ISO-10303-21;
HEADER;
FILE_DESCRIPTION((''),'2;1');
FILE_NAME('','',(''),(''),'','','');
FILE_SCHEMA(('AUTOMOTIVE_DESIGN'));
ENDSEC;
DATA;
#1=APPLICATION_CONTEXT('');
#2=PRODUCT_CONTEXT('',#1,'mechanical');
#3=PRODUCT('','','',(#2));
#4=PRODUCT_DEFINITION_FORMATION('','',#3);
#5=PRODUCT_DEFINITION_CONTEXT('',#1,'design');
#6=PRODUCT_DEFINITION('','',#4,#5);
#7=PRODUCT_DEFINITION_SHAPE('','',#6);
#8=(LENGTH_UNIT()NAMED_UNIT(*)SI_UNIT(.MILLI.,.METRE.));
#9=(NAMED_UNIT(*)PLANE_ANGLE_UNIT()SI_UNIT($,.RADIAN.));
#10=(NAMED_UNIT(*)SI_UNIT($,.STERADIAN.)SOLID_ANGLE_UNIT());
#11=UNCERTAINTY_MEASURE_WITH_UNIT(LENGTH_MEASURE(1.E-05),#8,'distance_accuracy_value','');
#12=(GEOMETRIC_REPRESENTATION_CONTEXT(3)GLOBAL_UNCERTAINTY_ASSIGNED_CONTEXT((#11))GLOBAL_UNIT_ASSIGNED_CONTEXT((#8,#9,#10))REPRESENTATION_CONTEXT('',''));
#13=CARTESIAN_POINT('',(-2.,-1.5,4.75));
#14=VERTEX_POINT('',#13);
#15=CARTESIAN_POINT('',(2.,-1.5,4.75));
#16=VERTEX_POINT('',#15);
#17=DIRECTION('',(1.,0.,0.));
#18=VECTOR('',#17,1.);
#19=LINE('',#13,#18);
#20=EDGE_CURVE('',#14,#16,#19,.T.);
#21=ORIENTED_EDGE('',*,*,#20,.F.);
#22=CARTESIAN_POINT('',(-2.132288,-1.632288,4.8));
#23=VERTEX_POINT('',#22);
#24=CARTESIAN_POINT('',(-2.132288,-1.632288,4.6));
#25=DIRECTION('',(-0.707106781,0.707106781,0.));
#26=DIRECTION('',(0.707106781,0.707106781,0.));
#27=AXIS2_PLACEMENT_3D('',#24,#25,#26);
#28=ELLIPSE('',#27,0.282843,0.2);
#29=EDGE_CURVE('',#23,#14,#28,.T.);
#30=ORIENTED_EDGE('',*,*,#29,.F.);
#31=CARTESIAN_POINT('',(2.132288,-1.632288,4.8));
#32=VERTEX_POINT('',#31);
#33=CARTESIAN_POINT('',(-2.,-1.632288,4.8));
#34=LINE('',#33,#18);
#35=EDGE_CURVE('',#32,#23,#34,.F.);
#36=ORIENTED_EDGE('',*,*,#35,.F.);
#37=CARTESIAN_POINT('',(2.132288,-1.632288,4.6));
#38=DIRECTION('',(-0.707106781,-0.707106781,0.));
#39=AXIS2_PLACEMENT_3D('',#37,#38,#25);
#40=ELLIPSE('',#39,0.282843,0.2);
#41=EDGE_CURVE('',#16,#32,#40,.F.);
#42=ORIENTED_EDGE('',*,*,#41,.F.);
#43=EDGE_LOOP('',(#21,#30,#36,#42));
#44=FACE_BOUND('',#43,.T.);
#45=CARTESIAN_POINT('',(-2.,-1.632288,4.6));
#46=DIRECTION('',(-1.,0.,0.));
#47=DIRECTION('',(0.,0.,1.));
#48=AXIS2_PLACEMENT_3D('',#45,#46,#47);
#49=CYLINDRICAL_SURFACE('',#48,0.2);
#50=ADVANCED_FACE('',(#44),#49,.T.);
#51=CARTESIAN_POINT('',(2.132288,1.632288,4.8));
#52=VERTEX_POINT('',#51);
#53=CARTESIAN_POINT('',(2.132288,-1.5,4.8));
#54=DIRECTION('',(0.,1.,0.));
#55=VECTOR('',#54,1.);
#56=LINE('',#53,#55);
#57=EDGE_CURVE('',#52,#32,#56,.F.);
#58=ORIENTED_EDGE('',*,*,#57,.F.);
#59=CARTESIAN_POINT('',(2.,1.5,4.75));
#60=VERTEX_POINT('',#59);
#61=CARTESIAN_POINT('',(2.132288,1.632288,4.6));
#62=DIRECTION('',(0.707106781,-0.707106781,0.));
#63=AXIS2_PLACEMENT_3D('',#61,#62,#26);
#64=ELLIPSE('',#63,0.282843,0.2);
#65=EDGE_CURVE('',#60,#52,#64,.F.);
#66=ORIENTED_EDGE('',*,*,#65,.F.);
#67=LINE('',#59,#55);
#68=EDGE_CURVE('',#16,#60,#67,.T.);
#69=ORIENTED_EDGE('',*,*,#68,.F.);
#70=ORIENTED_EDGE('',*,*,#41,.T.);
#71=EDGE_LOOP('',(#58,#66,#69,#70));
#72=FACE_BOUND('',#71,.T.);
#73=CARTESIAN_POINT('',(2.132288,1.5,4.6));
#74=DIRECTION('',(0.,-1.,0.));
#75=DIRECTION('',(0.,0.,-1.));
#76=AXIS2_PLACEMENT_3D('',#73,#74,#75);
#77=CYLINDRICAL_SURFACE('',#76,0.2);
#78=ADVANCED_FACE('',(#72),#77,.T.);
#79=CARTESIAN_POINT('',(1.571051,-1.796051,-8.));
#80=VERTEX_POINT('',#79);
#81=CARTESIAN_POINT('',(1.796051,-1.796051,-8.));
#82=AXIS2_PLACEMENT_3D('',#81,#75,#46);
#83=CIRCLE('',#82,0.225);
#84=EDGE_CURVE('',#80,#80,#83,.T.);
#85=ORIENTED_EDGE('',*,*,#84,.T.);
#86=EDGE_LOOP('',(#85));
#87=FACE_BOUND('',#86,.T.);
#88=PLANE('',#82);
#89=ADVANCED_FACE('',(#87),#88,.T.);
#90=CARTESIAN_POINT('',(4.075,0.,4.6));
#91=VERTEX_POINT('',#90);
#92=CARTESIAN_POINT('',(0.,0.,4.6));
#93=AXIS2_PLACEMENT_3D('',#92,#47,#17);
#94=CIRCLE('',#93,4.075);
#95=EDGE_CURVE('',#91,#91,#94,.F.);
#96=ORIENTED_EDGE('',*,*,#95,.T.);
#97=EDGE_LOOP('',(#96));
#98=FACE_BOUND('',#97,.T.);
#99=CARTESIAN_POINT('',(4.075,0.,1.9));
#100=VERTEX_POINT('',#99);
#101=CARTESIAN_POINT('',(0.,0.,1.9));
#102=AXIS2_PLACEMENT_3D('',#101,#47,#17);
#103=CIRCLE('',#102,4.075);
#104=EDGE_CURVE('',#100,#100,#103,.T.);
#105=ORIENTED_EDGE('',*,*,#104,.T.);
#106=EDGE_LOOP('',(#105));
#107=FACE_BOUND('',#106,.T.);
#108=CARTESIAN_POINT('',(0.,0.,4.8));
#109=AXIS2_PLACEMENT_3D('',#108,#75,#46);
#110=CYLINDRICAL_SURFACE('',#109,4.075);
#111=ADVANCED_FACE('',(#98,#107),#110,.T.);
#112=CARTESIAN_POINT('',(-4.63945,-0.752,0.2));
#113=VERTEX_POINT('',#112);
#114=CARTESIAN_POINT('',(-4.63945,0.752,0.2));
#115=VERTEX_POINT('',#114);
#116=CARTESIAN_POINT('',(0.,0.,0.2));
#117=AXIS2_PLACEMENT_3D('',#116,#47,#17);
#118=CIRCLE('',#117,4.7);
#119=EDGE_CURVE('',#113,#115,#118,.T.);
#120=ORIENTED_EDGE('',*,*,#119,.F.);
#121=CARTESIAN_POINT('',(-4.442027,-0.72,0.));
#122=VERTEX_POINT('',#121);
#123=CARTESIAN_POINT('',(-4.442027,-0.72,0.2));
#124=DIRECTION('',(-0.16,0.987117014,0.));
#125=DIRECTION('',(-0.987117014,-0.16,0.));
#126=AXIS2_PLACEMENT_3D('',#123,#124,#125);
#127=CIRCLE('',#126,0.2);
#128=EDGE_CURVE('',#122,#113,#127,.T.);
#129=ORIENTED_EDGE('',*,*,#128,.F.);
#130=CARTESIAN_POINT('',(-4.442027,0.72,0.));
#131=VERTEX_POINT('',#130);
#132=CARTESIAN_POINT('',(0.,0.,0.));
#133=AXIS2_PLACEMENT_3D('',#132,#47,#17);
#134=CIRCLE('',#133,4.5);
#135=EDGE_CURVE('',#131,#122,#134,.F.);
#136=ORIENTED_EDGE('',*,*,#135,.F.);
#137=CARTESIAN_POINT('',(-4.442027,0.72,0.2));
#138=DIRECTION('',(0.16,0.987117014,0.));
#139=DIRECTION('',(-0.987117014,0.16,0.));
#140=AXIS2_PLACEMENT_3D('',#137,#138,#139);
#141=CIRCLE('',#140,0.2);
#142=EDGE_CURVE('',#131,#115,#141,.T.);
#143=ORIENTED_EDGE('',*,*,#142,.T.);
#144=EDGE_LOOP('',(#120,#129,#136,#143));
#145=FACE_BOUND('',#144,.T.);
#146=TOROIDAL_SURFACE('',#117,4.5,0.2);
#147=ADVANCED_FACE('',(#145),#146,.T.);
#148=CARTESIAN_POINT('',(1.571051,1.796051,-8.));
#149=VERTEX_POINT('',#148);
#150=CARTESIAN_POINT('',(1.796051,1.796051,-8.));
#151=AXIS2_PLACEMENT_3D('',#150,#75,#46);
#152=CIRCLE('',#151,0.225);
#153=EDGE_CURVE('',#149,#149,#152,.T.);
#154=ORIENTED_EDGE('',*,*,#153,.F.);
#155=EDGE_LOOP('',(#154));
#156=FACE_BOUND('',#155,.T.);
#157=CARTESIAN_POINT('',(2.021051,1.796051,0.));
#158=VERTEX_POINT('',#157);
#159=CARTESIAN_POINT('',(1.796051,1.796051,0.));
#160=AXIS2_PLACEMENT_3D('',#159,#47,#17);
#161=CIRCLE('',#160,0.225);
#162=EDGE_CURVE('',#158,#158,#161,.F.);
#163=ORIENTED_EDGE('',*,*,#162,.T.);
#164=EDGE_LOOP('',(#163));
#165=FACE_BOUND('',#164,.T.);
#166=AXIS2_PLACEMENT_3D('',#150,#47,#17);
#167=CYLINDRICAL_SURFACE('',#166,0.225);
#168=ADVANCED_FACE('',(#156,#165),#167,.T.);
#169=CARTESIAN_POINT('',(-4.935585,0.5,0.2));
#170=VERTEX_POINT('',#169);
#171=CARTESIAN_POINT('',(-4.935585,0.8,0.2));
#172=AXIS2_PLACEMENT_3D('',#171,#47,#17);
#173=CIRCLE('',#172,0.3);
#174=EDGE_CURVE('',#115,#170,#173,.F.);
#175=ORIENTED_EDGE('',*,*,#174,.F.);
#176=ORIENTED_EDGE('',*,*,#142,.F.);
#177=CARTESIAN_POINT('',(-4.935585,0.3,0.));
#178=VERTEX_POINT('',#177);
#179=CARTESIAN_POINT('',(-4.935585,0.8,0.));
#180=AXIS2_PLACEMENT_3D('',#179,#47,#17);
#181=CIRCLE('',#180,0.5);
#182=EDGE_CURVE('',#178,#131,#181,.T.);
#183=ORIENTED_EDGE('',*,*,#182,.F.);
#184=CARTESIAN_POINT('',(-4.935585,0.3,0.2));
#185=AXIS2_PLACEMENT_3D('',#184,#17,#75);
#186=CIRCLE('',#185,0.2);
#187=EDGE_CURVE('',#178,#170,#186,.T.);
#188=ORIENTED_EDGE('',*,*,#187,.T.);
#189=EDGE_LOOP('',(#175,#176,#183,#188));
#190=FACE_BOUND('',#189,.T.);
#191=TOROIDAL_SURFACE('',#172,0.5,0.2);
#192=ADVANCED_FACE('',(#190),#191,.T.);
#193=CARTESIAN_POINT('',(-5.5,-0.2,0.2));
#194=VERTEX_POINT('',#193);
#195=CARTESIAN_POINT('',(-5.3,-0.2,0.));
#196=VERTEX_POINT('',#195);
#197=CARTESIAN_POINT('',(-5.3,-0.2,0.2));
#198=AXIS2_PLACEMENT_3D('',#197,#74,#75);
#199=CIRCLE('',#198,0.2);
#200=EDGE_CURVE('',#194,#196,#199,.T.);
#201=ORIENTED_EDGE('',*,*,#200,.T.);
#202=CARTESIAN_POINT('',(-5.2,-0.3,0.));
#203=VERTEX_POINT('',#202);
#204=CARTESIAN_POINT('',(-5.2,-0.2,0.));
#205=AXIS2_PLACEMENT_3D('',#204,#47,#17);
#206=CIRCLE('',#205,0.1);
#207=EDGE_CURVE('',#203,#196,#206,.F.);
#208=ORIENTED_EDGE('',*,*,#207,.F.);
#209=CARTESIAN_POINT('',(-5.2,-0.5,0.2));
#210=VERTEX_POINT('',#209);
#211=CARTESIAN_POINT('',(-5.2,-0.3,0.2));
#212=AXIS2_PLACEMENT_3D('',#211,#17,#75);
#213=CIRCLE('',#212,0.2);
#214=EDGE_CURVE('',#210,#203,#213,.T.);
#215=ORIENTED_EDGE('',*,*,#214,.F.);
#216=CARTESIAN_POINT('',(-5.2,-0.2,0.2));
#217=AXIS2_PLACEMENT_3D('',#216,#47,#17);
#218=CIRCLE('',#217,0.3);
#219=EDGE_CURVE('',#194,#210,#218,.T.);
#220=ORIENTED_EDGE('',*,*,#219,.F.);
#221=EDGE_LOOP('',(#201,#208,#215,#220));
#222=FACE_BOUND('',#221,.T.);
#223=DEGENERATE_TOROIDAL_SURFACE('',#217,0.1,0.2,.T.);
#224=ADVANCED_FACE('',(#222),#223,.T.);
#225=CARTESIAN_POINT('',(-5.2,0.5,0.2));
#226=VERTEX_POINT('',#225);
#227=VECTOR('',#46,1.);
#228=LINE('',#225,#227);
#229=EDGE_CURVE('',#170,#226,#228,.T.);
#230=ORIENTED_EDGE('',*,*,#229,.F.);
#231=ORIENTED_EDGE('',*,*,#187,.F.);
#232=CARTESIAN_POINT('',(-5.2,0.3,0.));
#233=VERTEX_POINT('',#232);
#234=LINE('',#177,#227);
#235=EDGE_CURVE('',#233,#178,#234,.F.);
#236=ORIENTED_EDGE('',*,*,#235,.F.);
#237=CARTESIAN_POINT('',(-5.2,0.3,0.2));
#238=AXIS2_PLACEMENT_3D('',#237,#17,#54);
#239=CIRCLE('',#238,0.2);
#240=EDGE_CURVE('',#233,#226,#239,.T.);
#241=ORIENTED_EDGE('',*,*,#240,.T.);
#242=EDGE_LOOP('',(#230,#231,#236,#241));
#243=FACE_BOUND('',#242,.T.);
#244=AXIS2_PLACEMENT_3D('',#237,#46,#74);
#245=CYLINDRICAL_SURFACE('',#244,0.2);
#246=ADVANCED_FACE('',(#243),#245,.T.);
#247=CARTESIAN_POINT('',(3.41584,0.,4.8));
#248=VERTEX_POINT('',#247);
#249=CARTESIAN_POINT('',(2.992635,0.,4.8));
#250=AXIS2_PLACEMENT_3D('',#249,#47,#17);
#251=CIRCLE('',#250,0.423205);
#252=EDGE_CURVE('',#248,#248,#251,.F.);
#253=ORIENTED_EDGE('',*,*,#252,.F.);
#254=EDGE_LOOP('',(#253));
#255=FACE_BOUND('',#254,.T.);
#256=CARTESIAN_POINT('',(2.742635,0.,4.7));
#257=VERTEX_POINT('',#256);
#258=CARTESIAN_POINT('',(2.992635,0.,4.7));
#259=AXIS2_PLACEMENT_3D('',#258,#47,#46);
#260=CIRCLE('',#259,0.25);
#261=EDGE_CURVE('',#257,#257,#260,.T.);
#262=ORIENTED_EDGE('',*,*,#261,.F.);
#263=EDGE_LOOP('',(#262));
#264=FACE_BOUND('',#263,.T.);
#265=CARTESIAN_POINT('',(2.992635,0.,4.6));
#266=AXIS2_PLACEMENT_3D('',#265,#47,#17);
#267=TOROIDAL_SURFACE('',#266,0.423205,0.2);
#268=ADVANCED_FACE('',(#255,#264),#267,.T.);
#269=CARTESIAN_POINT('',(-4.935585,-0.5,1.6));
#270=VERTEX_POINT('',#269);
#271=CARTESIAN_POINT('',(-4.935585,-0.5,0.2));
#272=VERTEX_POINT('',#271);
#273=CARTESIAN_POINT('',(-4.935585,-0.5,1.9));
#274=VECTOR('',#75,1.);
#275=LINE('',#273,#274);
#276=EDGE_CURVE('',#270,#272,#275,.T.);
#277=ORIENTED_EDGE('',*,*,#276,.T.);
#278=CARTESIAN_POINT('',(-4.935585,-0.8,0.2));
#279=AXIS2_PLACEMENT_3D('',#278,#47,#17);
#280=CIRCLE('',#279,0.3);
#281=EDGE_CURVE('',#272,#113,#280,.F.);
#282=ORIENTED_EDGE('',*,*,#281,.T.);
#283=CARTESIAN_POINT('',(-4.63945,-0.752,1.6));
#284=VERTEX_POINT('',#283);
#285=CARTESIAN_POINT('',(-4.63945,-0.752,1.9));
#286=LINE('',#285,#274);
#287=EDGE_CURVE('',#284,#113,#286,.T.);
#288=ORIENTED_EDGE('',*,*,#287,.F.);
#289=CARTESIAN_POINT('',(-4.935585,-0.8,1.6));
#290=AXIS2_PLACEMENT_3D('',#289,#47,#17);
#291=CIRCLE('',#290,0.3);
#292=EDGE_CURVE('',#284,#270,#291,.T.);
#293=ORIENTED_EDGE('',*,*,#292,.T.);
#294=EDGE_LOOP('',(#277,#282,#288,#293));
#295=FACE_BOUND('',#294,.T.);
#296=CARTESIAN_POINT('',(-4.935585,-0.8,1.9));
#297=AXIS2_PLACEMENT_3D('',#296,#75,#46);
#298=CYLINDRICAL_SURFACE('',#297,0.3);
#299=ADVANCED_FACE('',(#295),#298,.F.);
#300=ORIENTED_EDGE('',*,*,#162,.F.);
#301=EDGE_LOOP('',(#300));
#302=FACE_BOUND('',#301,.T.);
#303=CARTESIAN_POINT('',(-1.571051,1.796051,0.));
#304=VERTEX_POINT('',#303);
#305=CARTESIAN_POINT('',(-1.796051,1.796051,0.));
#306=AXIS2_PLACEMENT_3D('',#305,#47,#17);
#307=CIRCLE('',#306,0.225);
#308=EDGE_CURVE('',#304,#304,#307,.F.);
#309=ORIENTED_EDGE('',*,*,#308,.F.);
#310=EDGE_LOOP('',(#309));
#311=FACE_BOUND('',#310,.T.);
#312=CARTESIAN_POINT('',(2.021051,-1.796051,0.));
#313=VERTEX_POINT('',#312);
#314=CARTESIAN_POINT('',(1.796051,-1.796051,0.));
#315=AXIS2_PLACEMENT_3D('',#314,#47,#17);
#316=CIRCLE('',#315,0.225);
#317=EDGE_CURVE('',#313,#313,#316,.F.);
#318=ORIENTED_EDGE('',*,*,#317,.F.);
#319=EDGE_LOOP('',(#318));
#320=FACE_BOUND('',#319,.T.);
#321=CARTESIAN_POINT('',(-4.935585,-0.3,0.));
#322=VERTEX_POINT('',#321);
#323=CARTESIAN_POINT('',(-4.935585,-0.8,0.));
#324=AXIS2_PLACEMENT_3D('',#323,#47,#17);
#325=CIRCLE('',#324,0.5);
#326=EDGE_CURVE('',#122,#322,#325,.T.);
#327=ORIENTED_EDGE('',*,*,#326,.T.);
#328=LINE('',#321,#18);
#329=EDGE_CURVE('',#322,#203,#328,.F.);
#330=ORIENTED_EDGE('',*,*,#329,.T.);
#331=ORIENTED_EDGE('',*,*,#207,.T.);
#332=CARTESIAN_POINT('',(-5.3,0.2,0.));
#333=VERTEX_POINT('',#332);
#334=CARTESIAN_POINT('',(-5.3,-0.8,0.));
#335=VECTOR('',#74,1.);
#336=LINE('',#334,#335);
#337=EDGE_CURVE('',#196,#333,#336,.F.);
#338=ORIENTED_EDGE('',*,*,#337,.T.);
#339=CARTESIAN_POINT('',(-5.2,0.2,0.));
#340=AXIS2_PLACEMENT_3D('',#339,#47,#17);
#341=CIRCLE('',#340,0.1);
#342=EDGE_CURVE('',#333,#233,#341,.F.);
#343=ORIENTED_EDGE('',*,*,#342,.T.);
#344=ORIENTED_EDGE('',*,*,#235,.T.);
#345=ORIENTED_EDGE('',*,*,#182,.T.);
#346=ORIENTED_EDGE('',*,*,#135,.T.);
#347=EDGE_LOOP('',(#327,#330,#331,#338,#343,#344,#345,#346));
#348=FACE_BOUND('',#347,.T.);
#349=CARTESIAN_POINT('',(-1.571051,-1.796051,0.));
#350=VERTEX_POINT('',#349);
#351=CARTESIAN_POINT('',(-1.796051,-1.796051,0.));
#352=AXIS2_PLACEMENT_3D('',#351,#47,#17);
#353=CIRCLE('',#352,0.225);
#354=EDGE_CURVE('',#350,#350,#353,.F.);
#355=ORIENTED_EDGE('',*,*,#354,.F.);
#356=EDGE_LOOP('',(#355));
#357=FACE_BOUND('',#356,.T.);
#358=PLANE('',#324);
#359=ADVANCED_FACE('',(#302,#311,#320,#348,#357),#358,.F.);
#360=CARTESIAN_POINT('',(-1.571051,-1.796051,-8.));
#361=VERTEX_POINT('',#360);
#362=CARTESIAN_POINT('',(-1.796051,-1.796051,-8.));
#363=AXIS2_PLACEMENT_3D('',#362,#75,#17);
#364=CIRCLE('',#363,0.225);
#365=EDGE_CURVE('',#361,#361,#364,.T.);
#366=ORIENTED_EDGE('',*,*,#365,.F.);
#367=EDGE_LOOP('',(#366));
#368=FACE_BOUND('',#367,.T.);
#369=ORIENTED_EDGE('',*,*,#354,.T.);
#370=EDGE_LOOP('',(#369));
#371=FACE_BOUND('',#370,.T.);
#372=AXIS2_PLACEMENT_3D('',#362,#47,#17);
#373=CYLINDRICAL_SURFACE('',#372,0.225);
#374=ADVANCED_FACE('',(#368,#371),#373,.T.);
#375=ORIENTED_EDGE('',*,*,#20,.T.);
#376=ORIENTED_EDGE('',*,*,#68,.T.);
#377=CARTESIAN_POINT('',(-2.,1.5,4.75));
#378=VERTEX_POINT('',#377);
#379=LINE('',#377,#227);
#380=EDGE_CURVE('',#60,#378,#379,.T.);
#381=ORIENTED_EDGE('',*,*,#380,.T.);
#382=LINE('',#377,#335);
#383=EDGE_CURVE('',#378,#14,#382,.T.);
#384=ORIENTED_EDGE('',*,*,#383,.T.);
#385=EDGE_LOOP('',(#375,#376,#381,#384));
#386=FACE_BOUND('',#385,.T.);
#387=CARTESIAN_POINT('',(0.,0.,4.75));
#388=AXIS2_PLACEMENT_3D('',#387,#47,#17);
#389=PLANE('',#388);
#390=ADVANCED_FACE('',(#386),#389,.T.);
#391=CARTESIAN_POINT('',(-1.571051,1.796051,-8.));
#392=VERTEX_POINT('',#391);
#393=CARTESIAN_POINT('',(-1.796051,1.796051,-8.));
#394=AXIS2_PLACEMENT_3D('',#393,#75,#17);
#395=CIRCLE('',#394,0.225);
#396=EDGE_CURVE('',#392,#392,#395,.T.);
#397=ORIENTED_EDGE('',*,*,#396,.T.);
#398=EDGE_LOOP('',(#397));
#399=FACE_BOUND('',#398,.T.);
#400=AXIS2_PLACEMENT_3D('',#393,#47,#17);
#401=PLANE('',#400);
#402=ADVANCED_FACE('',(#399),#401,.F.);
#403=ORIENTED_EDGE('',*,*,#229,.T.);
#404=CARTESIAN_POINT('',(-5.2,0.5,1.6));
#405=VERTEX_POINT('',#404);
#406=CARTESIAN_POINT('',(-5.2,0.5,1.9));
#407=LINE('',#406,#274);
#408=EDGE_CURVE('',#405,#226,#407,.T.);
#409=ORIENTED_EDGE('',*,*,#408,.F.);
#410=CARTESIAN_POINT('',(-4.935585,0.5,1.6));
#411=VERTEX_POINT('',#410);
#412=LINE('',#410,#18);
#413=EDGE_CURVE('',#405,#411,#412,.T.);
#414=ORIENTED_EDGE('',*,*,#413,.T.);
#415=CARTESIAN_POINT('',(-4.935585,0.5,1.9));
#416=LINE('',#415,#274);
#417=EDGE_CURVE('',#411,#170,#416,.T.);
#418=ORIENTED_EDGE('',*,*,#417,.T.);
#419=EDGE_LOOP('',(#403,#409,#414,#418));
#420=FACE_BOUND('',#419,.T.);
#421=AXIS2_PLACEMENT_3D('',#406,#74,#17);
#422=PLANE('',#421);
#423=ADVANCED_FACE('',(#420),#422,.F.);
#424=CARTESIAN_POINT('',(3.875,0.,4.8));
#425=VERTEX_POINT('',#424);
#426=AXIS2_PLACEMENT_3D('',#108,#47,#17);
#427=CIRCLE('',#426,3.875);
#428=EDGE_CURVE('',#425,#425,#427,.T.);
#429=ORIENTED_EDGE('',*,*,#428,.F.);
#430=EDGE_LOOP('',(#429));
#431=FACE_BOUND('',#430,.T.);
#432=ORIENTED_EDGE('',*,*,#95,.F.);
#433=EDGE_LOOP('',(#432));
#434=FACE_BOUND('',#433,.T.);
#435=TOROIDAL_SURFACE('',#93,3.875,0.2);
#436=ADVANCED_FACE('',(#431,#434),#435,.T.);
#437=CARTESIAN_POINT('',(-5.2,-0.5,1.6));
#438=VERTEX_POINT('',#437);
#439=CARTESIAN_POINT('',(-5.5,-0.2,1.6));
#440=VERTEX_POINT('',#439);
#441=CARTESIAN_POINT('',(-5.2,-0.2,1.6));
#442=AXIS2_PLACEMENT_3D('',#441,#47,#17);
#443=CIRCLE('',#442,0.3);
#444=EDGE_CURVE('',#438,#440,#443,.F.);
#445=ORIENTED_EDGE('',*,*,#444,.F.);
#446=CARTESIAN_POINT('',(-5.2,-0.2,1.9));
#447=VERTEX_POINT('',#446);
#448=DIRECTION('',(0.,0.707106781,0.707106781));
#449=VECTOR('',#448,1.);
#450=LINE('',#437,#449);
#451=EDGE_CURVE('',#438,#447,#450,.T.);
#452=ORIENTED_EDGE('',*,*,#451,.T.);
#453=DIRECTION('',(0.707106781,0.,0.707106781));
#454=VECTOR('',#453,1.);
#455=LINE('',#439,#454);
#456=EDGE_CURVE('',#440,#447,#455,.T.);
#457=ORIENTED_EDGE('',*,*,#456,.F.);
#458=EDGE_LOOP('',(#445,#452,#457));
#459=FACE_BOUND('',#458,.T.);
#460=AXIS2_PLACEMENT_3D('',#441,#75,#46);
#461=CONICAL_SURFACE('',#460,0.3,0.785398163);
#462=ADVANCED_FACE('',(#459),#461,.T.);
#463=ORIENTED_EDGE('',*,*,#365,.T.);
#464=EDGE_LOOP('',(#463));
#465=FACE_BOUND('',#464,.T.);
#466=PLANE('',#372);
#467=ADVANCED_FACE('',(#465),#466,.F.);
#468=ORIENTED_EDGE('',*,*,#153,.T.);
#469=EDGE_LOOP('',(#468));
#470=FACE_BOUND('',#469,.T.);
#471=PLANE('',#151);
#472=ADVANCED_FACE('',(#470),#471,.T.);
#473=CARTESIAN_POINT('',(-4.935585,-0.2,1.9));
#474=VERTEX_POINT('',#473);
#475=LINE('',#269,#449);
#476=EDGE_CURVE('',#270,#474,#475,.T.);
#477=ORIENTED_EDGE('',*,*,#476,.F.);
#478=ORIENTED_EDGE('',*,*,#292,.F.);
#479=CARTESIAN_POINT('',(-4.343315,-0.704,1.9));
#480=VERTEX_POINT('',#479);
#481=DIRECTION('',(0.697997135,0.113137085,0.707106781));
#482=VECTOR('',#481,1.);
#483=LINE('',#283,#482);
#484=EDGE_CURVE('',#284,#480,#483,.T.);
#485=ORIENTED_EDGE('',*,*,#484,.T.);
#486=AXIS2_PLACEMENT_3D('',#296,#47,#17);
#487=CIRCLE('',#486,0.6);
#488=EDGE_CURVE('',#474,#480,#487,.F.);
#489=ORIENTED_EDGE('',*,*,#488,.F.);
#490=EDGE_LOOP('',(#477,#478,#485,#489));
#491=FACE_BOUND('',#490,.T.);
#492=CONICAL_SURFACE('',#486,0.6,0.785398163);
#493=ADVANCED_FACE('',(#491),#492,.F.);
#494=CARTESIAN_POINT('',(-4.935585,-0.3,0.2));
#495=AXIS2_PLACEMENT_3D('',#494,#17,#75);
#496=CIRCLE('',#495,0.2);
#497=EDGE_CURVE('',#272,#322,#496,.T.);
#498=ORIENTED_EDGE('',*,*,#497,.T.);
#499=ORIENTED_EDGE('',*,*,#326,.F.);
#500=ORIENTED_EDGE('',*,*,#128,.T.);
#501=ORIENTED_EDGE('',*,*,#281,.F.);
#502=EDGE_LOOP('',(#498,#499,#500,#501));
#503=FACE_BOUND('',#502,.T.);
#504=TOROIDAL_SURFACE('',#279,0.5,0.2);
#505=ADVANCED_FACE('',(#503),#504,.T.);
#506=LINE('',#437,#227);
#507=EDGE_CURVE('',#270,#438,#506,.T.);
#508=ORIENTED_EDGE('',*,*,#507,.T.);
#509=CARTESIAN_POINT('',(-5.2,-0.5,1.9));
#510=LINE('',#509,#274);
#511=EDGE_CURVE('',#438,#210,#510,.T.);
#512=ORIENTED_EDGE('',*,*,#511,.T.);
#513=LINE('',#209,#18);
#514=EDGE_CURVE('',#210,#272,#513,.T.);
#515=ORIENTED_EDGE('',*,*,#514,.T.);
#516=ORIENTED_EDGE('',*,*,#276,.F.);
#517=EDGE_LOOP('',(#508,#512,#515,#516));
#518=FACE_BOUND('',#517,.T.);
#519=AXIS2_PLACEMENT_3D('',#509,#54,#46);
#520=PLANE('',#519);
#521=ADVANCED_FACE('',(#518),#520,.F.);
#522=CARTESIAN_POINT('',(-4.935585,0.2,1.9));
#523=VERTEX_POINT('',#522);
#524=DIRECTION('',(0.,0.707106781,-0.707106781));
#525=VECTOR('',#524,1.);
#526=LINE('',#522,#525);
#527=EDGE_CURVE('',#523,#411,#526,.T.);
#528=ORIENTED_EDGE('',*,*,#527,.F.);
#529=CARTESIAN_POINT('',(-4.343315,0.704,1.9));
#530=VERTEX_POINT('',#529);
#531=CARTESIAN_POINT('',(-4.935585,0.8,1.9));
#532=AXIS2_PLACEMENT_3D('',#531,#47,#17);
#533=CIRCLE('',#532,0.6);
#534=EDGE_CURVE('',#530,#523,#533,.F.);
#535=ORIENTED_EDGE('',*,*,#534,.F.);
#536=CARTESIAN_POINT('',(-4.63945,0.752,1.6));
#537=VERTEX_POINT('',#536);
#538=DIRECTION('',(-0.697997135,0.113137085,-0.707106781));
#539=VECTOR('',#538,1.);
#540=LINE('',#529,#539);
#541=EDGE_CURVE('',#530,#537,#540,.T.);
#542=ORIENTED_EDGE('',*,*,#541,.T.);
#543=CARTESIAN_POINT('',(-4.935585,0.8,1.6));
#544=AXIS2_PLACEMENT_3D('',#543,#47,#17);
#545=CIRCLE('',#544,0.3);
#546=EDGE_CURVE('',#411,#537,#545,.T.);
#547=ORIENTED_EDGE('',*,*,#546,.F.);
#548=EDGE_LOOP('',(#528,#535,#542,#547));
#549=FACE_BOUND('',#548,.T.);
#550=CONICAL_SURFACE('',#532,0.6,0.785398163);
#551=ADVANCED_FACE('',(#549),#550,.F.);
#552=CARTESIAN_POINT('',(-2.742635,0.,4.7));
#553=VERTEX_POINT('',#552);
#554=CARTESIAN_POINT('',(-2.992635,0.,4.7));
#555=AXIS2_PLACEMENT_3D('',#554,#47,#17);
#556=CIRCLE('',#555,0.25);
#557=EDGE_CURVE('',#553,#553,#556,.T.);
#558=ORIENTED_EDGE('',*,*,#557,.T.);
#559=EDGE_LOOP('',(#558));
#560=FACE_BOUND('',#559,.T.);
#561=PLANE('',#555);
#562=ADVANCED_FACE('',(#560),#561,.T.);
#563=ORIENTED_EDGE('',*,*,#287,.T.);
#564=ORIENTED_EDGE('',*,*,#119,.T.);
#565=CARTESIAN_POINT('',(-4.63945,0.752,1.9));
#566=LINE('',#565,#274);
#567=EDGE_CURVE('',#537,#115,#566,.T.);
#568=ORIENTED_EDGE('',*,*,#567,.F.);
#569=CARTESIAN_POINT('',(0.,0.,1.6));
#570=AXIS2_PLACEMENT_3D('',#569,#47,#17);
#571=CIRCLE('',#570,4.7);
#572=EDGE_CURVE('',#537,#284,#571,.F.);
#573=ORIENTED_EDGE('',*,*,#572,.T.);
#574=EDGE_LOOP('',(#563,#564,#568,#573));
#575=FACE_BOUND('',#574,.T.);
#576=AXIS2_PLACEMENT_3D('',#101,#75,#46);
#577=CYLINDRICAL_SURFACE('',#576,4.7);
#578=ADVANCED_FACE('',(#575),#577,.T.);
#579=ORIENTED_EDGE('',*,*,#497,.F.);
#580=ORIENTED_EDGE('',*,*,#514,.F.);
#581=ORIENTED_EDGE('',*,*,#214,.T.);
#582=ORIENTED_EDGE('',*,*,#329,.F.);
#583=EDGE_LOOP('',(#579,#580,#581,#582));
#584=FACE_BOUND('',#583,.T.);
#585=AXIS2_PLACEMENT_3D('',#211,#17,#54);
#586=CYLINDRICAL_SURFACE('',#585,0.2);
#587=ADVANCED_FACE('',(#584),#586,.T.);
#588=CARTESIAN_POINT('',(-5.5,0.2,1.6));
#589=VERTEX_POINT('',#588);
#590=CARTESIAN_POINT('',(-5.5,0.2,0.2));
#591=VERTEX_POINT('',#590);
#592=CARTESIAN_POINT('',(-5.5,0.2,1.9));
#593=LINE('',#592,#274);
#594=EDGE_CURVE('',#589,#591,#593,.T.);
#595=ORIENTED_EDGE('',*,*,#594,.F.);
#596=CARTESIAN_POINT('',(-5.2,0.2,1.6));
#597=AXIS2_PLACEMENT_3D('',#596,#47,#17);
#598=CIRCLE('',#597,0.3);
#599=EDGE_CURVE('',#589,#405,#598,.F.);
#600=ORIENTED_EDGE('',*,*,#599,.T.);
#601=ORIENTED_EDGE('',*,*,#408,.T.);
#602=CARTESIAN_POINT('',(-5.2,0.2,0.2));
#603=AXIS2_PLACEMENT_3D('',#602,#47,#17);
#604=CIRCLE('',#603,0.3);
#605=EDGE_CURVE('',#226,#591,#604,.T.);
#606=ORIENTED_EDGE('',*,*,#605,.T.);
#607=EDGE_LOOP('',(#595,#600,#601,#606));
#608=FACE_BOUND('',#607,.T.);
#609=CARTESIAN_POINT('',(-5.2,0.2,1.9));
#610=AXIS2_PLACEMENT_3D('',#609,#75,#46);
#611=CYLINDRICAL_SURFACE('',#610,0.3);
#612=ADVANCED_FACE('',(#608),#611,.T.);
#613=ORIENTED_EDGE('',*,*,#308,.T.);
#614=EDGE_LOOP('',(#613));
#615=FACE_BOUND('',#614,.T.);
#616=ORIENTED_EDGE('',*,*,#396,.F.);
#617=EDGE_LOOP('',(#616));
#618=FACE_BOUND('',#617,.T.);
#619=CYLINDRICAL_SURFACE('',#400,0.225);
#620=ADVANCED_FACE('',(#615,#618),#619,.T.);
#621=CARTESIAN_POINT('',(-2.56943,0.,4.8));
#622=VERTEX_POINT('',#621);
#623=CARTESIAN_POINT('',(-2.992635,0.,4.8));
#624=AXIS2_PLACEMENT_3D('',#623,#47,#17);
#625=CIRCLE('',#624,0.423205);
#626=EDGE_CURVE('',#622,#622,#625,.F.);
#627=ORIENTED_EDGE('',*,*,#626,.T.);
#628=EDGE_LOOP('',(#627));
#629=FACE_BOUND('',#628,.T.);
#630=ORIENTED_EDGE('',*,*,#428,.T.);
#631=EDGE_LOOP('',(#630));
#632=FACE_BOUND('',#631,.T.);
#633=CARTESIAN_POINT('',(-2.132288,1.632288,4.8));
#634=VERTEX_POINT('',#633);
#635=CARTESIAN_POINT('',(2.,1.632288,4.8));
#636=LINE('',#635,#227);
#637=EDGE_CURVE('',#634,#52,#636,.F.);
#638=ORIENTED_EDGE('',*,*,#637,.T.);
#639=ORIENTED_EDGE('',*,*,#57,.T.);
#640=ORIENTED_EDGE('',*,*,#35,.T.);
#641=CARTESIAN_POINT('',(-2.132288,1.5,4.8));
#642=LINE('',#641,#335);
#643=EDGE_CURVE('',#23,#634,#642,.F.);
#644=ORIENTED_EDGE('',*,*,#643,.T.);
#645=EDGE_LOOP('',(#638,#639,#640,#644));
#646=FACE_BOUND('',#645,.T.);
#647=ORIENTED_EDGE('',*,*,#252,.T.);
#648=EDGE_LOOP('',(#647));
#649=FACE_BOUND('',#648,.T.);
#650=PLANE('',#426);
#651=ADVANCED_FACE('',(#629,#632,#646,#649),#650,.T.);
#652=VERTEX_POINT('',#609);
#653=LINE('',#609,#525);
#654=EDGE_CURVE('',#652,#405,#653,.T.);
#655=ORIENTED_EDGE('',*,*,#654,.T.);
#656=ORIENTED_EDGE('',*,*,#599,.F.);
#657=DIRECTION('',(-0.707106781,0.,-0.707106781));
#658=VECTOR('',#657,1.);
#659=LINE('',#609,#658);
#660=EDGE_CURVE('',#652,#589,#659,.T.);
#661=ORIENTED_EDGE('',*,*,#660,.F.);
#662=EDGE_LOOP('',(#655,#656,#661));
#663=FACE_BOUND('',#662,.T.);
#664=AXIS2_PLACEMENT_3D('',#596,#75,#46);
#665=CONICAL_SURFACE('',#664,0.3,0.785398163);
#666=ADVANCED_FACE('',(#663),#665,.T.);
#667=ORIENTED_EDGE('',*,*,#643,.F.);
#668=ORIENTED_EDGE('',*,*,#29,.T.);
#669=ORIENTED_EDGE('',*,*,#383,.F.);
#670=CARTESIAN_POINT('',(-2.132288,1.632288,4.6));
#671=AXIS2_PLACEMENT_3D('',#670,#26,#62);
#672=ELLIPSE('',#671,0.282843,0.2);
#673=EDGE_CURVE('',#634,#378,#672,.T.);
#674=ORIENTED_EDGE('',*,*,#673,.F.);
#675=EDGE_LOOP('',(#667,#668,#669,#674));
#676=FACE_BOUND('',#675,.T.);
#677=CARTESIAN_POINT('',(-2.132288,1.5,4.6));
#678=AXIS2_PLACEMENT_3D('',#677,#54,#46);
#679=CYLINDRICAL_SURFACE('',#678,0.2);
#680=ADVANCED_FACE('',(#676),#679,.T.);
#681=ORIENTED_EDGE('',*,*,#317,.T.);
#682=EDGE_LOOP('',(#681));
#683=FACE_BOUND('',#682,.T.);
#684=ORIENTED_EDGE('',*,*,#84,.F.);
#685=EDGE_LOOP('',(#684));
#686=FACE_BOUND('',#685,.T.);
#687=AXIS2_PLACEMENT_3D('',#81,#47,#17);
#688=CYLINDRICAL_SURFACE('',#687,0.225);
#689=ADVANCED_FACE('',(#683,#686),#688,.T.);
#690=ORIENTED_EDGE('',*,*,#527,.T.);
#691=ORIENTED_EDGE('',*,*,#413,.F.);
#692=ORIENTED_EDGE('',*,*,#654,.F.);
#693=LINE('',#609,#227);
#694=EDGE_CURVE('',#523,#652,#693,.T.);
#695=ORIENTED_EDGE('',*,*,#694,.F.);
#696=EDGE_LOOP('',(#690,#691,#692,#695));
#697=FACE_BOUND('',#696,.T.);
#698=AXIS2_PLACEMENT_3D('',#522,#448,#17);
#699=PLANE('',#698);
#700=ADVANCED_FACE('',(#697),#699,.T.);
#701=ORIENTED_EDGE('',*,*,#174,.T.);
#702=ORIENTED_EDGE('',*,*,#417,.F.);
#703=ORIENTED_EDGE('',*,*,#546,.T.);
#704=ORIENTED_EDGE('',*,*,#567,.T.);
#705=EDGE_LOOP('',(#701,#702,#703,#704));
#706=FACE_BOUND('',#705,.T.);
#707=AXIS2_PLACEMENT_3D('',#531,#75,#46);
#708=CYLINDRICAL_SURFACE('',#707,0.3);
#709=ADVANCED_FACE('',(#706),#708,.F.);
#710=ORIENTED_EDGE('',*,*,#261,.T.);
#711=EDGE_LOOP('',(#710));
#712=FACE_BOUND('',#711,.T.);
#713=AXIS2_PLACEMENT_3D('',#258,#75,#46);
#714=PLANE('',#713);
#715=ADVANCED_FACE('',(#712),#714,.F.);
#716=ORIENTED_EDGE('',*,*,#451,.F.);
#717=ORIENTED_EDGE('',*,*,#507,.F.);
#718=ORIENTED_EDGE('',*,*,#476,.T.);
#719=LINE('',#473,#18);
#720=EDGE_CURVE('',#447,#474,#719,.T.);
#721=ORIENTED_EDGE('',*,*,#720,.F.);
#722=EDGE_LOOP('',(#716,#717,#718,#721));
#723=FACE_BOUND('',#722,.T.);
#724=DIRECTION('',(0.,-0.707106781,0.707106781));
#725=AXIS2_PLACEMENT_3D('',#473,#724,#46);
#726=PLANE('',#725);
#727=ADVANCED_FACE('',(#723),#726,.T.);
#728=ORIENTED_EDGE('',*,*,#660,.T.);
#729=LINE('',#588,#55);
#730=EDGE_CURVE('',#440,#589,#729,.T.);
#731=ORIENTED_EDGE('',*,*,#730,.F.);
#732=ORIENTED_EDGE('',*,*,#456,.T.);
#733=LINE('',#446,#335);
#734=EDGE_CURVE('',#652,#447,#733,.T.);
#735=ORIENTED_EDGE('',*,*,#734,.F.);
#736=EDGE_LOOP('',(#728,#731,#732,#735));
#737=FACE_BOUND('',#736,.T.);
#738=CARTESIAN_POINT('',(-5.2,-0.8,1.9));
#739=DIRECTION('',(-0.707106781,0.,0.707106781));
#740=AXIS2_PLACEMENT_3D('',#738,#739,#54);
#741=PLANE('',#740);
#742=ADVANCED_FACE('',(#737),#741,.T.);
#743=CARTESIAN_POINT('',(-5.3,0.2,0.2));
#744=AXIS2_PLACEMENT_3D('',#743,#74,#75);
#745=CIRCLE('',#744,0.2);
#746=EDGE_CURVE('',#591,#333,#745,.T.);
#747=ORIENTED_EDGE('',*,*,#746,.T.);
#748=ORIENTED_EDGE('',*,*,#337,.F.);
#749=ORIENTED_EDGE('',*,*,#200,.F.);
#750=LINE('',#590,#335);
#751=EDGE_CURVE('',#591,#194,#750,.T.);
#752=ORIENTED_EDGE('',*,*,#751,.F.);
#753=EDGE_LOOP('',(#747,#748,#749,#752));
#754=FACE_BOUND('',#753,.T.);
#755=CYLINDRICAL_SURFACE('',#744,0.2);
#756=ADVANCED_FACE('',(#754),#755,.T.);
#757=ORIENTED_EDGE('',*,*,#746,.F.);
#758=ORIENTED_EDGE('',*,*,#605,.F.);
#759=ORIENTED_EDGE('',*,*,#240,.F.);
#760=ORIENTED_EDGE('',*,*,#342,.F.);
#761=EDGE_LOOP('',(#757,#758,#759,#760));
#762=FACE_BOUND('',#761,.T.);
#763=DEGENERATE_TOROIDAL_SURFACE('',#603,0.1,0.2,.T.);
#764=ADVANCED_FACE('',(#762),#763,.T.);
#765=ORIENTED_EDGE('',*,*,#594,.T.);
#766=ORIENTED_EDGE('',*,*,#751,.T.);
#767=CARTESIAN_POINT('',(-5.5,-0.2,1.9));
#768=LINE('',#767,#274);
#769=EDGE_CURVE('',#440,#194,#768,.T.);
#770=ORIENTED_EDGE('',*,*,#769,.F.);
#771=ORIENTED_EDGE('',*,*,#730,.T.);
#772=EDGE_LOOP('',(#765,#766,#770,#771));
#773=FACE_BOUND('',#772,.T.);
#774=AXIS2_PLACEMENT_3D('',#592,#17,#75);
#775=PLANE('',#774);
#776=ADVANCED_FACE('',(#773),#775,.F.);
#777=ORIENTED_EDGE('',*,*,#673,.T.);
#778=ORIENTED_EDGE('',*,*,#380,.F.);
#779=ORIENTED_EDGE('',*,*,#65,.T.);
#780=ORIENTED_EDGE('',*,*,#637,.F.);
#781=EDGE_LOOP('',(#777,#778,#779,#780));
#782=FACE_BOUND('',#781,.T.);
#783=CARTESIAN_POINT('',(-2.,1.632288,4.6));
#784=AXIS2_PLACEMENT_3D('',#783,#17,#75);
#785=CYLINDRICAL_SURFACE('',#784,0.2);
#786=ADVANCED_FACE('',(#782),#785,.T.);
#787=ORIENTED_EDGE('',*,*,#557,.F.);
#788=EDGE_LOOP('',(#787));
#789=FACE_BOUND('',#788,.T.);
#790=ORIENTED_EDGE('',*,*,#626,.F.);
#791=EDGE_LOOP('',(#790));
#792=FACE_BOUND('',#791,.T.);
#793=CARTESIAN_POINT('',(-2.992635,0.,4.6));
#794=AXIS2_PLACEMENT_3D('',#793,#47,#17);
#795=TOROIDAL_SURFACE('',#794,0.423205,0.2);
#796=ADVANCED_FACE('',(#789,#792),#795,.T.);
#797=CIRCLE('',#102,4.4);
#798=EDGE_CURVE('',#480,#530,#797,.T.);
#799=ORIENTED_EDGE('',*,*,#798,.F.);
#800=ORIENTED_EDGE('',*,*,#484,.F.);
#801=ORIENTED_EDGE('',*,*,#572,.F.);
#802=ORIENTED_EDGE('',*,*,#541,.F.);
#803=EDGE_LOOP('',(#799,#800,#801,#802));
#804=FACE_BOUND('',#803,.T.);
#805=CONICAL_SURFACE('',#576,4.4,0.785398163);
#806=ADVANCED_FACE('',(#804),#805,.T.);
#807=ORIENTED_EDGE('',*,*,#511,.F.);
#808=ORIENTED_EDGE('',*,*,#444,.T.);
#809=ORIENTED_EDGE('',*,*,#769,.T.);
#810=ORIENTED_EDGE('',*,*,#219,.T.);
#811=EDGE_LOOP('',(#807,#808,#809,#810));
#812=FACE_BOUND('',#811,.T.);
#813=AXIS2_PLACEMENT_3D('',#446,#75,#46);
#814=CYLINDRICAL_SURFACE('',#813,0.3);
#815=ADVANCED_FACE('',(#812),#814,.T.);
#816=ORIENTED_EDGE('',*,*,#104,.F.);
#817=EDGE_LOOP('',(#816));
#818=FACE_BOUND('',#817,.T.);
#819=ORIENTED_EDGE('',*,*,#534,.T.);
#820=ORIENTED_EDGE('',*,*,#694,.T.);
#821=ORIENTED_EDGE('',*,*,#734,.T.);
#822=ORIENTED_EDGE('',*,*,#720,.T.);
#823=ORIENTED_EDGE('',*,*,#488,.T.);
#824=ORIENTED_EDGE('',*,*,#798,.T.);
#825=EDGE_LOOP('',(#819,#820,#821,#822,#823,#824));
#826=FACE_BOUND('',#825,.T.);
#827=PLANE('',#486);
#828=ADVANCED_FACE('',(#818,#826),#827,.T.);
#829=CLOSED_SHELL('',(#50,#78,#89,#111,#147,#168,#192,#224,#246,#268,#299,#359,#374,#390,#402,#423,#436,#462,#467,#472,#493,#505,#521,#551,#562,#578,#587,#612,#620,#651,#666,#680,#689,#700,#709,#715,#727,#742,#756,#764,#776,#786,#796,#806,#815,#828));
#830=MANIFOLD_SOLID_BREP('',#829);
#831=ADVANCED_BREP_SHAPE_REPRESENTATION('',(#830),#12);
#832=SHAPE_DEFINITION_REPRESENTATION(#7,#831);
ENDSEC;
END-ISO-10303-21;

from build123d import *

# Parameters (mm, degrees)
EXTRUDE_417_DEPTH      = 1.9
SKETCH_3_R             = 4.075
EXTRUDE_605_DEPTH      = 2.9
SKETCH_6_W             = 4
SKETCH_6_H             = 3
CUT_EXTRUDE_752_DEPTH  = 0.05
SKETCH_7_R             = 0.25
CUT_EXTRUDE_1002_DEPTH = 0.1
SKETCH_4_R             = 0.225
EXTRUDE_1397_DEPTH     = 8
CHAMFER_1_SIZE         = 0.3
FILLET_1_R             = 0.2


# Some blends are built 0.0001 mm under size
with BuildPart() as part:
    # 草图2 → Extrude 417 (new body)
    with BuildSketch(Plane.XY):
        with BuildLine():
            Line((-5.5, 0.2), (-5.5, -0.2))
            ThreePointArc((-5.5, -0.2), (-5.412132034, -0.412132034), (-5.2, -0.5))
            Line((-5.2, -0.5), (-4.935585072, -0.5))
            ThreePointArc((-4.935585072, -0.5), (-4.741162851, -0.571526807), (-4.639449967, -0.752))
            ThreePointArc((-4.639449967, -0.752), (4.7, 0), (-4.639449967, 0.752))
            ThreePointArc((-4.639449967, 0.752), (-4.741162851, 0.571526807), (-4.935585072, 0.5))
            Line((-4.935585072, 0.5), (-5.2, 0.5))
            ThreePointArc((-5.2, 0.5), (-5.412132034, 0.412132034), (-5.5, 0.2))
        make_face()
    extrude(amount=EXTRUDE_417_DEPTH)

    # 草图3 → Extrude 605 (add)
    with BuildSketch(Plane.XY.offset(1.9)):
        Circle(SKETCH_3_R)
    extrude(amount=EXTRUDE_605_DEPTH)

    # 草图6 → Cut-Extrude 752 (cut)
    with BuildSketch(Plane.XY.offset(4.8)):
        Rectangle(SKETCH_6_W, SKETCH_6_H)
    extrude(amount=-CUT_EXTRUDE_752_DEPTH, mode=Mode.SUBTRACT)

    # 草图7 → Cut-Extrude 1002 (cut)
    with BuildSketch(Plane.XY.offset(4.8)):
        with Locations((-2.992635388, 0)):
            Circle(SKETCH_7_R)
        with Locations(Location((2.992635388, 0, 0), (0, 0, 180))):
            Circle(SKETCH_7_R)
    extrude(amount=-CUT_EXTRUDE_1002_DEPTH, mode=Mode.SUBTRACT)

    # 草图4 → Extrude 1397 (add)
    with BuildSketch(Plane(origin=(0, 0, 0), x_dir=(-1, 0, 0), z_dir=(0, 0, -1))):
        with Locations(Location((-1.796051224, -1.796051224, 0), (0, 0, 180))):
            Circle(SKETCH_4_R)
        with Locations(Location((-1.796051224, 1.796051224, 0), (0, 0, 180))):
            Circle(SKETCH_4_R)
        with Locations(Location((1.796051224, -1.796051224, 0), (0, 0, 180))):
            Circle(SKETCH_4_R)
        with Locations(Location((1.796051224, 1.796051224, 0), (0, 0, 180))):
            Circle(SKETCH_4_R)
    extrude(amount=EXTRUDE_1397_DEPTH)

    # 倒角1
    chamfer_1_edges = [part.edges().sort_by_distance(p)[0] for p in [
        (-4.741162851, 0.571526807, 1.9),
        (-5.067792536, 0.5, 1.9),
        (-5.412132034, 0.412132034, 1.9),
        (-5.5, 0, 1.9),
        (-5.412132034, -0.412132034, 1.9),
        (-5.067792536, -0.5, 1.9),
        (-4.741162851, -0.571526807, 1.9),
        (4.7, 0, 1.9),
    ]]
    chamfer(chamfer_1_edges, length=CHAMFER_1_SIZE - 0.0001)  # a hair under: the kernel refuses the full size

    # 圆角1
    # the kernel refuses this fillet: 0.2 mm, written as the material it takes off along each edge
    with BuildSketch(Plane(origin=(-4.935585072, -0.8, 0), x_dir=(0, 1, 0), z_dir=(-1, 0, 0))) as fillet_1_piece_1:
        with BuildLine():
            CenterArc((0.3 + FILLET_1_R, -FILLET_1_R), FILLET_1_R, 90, 90)
            Line((0.3, -FILLET_1_R), (0.3 - FILLET_1_R * 0.02, -FILLET_1_R))
            Line((0.3 - FILLET_1_R * 0.02, -FILLET_1_R), (0.3 - FILLET_1_R * 0.02, FILLET_1_R * 0.02))
            Line((0.3 - FILLET_1_R * 0.02, FILLET_1_R * 0.02), (0.3 + FILLET_1_R, FILLET_1_R * 0.02))
            Line((0.3 + FILLET_1_R, FILLET_1_R * 0.02), (0.3 + FILLET_1_R, 0))
        make_face()
    revolve(axis=Axis((-4.935585072, -0.8, 0), (0, 0, -1)), revolution_arc=80.793103779, mode=Mode.SUBTRACT)
    with BuildSketch(Plane(origin=(-5.2, -0.5, 0), x_dir=(0, 1, 0), z_dir=(1, 0, 0))) as fillet_1_piece_2:
        with BuildLine():
            CenterArc((FILLET_1_R, FILLET_1_R), FILLET_1_R, 180, 90)
            Line((0, FILLET_1_R), (-FILLET_1_R * 0.02, FILLET_1_R))
            Line((-FILLET_1_R * 0.02, FILLET_1_R), (-FILLET_1_R * 0.02, -FILLET_1_R * 0.02))
            Line((-FILLET_1_R * 0.02, -FILLET_1_R * 0.02), (FILLET_1_R, -FILLET_1_R * 0.02))
            Line((FILLET_1_R, -FILLET_1_R * 0.02), (FILLET_1_R, 0))
        make_face()
    extrude(amount=0.264414928, mode=Mode.SUBTRACT)
    with BuildSketch(Plane(origin=(-5.2, -0.2, 0), x_dir=(-1, 0, 0), z_dir=(0, 1, 0))) as fillet_1_piece_3:
        with BuildLine():
            CenterArc((0.3 - FILLET_1_R, FILLET_1_R), FILLET_1_R, 270, 90)
            Line((0.3, FILLET_1_R), (0.3 + FILLET_1_R * 0.02, FILLET_1_R))
            Line((0.3 + FILLET_1_R * 0.02, FILLET_1_R), (0.3 + FILLET_1_R * 0.02, -FILLET_1_R * 0.02))
            Line((0.3 + FILLET_1_R * 0.02, -FILLET_1_R * 0.02), (0.3 - FILLET_1_R, -FILLET_1_R * 0.02))
            Line((0.3 - FILLET_1_R, -FILLET_1_R * 0.02), (0.3 - FILLET_1_R, 0))
        make_face()
    revolve(axis=Axis((-5.2, -0.2, 0), (0, 0, 1)), revolution_arc=90, mode=Mode.SUBTRACT)
    with BuildSketch(Plane(origin=(-5.5, 0.2, 0), x_dir=(1, 0, 0), z_dir=(0, -1, 0))) as fillet_1_piece_4:
        with BuildLine():
            CenterArc((FILLET_1_R, FILLET_1_R), FILLET_1_R, 180, 90)
            Line((0, FILLET_1_R), (-FILLET_1_R * 0.02, FILLET_1_R))
            Line((-FILLET_1_R * 0.02, FILLET_1_R), (-FILLET_1_R * 0.02, -FILLET_1_R * 0.02))
            Line((-FILLET_1_R * 0.02, -FILLET_1_R * 0.02), (FILLET_1_R, -FILLET_1_R * 0.02))
            Line((FILLET_1_R, -FILLET_1_R * 0.02), (FILLET_1_R, 0))
        make_face()
    extrude(amount=0.4, mode=Mode.SUBTRACT)
    with BuildSketch(Plane(origin=(-5.2, 0.2, 0), x_dir=(0, 1, 0), z_dir=(1, 0, 0))) as fillet_1_piece_5:
        with BuildLine():
            CenterArc((0.3 - FILLET_1_R, FILLET_1_R), FILLET_1_R, 270, 90)
            Line((0.3 - FILLET_1_R, 0), (0.3 - FILLET_1_R, -FILLET_1_R * 0.02))
            Line((0.3 - FILLET_1_R, -FILLET_1_R * 0.02), (0.3 + FILLET_1_R * 0.02, -FILLET_1_R * 0.02))
            Line((0.3 + FILLET_1_R * 0.02, -FILLET_1_R * 0.02), (0.3 + FILLET_1_R * 0.02, FILLET_1_R))
            Line((0.3 + FILLET_1_R * 0.02, FILLET_1_R), (0.3, FILLET_1_R))
        make_face()
    revolve(axis=Axis((-5.2, 0.2, 0), (0, 0, 1)), revolution_arc=90, mode=Mode.SUBTRACT)
    with BuildSketch(Plane(origin=(-4.935585072, 0.5, 0), x_dir=(0, 0, 1), z_dir=(-1, 0, 0))) as fillet_1_piece_6:
        with BuildLine():
            CenterArc((FILLET_1_R, -FILLET_1_R), FILLET_1_R, 90, 90)
            Line((0, -FILLET_1_R), (-FILLET_1_R * 0.02, -FILLET_1_R))
            Line((-FILLET_1_R * 0.02, -FILLET_1_R), (-FILLET_1_R * 0.02, FILLET_1_R * 0.02))
            Line((-FILLET_1_R * 0.02, FILLET_1_R * 0.02), (FILLET_1_R, FILLET_1_R * 0.02))
            Line((FILLET_1_R, FILLET_1_R * 0.02), (FILLET_1_R, 0))
        make_face()
    extrude(amount=0.264414928, mode=Mode.SUBTRACT)
    with BuildSketch(Plane(origin=(-4.935585072, 0.8, 0), x_dir=(0.9871170143402451, -0.16000000000000056, 0), z_dir=(0.16000000000000056, 0.9871170143402451, 0))) as fillet_1_piece_7:
        with BuildLine():
            CenterArc((0.3 + FILLET_1_R, -FILLET_1_R), FILLET_1_R, 90, 90)
            Line((0.3, -FILLET_1_R), (0.3 - FILLET_1_R * 0.02, -FILLET_1_R))
            Line((0.3 - FILLET_1_R * 0.02, -FILLET_1_R), (0.3 - FILLET_1_R * 0.02, FILLET_1_R * 0.02))
            Line((0.3 - FILLET_1_R * 0.02, FILLET_1_R * 0.02), (0.3 + FILLET_1_R, FILLET_1_R * 0.02))
            Line((0.3 + FILLET_1_R, FILLET_1_R * 0.02), (0.3 + FILLET_1_R, 0))
        make_face()
    revolve(axis=Axis((-4.935585072, 0.8, 0), (0, 0, -1)), revolution_arc=80.793103779, mode=Mode.SUBTRACT)
    with BuildSketch(Plane(origin=(0, 0, 4.8), x_dir=(1, 0, 0), z_dir=(0, -1, 0))) as fillet_1_piece_8:
        with BuildLine():
            CenterArc((4.075 - FILLET_1_R, -FILLET_1_R), FILLET_1_R, 0, 90)
            Line((4.075 - FILLET_1_R, 0), (4.075 - FILLET_1_R, FILLET_1_R * 0.02))
            Line((4.075 - FILLET_1_R, FILLET_1_R * 0.02), (4.075 + FILLET_1_R * 0.02, FILLET_1_R * 0.02))
            Line((4.075 + FILLET_1_R * 0.02, FILLET_1_R * 0.02), (4.075 + FILLET_1_R * 0.02, -FILLET_1_R))
            Line((4.075 + FILLET_1_R * 0.02, -FILLET_1_R), (4.075, -FILLET_1_R))
        make_face()
    revolve(axis=Axis((0, 0, 4.8), (0, 0, 1)), mode=Mode.SUBTRACT)
    with BuildSketch(Plane(origin=(0, 0, 0), x_dir=(-0.9871170143402452, -0.16000000000000036, 0), z_dir=(-0.16000000000000036, 0.9871170143402452, 0))) as fillet_1_piece_9:
        with BuildLine():
            CenterArc((4.7 - FILLET_1_R, FILLET_1_R), FILLET_1_R, 270, 90)
            Line((4.7, FILLET_1_R), (4.7 + FILLET_1_R * 0.02, FILLET_1_R))
            Line((4.7 + FILLET_1_R * 0.02, FILLET_1_R), (4.7 + FILLET_1_R * 0.02, -FILLET_1_R * 0.02))
            Line((4.7 + FILLET_1_R * 0.02, -FILLET_1_R * 0.02), (4.7 - FILLET_1_R, -FILLET_1_R * 0.02))
            Line((4.7 - FILLET_1_R, -FILLET_1_R * 0.02), (4.7 - FILLET_1_R, 0))
        make_face()
    revolve(axis=Axis((0, 0, 0), (0, 0, 1)), revolution_arc=341.586207557, mode=Mode.SUBTRACT)
    with BuildSketch(Plane(origin=(2.992635388, 0, 4.8), x_dir=(-1, 0, 0), z_dir=(0, 1, 0))) as fillet_1_piece_10:
        with BuildLine():
            CenterArc((0.423205081, -0.2), FILLET_1_R, 90, 60)
            Line((0.25, -0.1), (0.246535898, -0.098))
            ThreePointArc((0.246535898, -0.098), (0.246, -0.05), (0.246, 0))
            Line((0.246, 0), (0.25, 0.004))
            Line((0.25, 0.004), (0.423205081, 0.004))
            Line((0.423205081, 0.004), (0.423205081, 0))
        make_face()
    revolve(axis=Axis((2.992635388, 0, 4.8), (0, 0, 1)), mode=Mode.SUBTRACT)
    with BuildSketch(Plane(origin=(-2.992635388, 0, 4.8), x_dir=(1, 0, 0), z_dir=(0, -1, 0))) as fillet_1_piece_11:
        with BuildLine():
            CenterArc((0.423205081, -0.2), FILLET_1_R, 90, 60)
            Line((0.25, -0.1), (0.246535898, -0.098))
            ThreePointArc((0.246535898, -0.098), (0.246, -0.05), (0.246, 0))
            Line((0.246, 0), (0.25, 0.004))
            Line((0.25, 0.004), (0.423205081, 0.004))
            Line((0.423205081, 0.004), (0.423205081, 0))
        make_face()
    revolve(axis=Axis((-2.992635388, 0, 4.8), (0, 0, 1)), mode=Mode.SUBTRACT)
    with BuildSketch(Plane(origin=(-2, 1.5, 4.8), x_dir=(0, 1, 0), z_dir=(1, 0, 0)), Plane(origin=(2, -1.5, 4.8), x_dir=(0, -1, 0), z_dir=(-1, 0, 0))) as fillet_1_piece_12:
        with BuildLine():
            CenterArc((0.132287566, -0.2), FILLET_1_R, 90, 41.409622109)
            Line((0, -0.05), (-0.002645751, -0.047))
            ThreePointArc((-0.002645751, -0.047), (-0.004, -0.025), (-0.004, 0))
            Line((-0.004, 0), (0, 0.004))
            Line((0, 0.004), (0.132287566, 0.004))
            Line((0.132287566, 0.004), (0.132287566, 0))
        make_face()
    extrude(amount=4, mode=Mode.SUBTRACT)
    with BuildSketch(Plane(origin=(-2, -1.5, 4.8), x_dir=(-1, 0, 0), z_dir=(0, 1, 0)), Plane(origin=(2, 1.5, 4.8), x_dir=(1, 0, 0), z_dir=(0, -1, 0))) as fillet_1_piece_13:
        with BuildLine():
            CenterArc((0.132287566, -0.2), FILLET_1_R, 90, 41.409622109)
            Line((0, -0.05), (-0.002645751, -0.047))
            ThreePointArc((-0.002645751, -0.047), (-0.004, -0.025), (-0.004, 0))
            Line((-0.004, 0), (0, 0.004))
            Line((0, 0.004), (0.132287566, 0.004))
            Line((0.132287566, 0.004), (0.132287566, 0))
        make_face()
    extrude(amount=3, mode=Mode.SUBTRACT)
    with BuildSketch(Plane(origin=(-2, -1.5, 4.8), x_dir=(-1, 0, 0), z_dir=(0, 1, 0))) as fillet_1_piece_14a_section:
        with BuildLine():
            CenterArc((0.132287566, -0.2), FILLET_1_R, 90, 41.409622109)
            Line((0, -0.05), (-0.002645751, -0.047))
            ThreePointArc((-0.002645751, -0.047), (-0.004, -0.025), (-0.004, 0))
            Line((-0.004, 0), (0, 0.004))
            Line((0, 0.004), (0.132287566, 0.004))
            Line((0.132287566, 0.004), (0.132287566, 0))
        make_face()
    fillet_1_piece_14a = extrude(amount=3.330718914, mode=Mode.PRIVATE)
    fillet_1_piece_14a = split(fillet_1_piece_14a, bisect_by=Plane(origin=(-2.036281513, 1.5, 4.788045002), z_dir=(0, 1, 0)), keep=Keep.TOP, mode=Mode.PRIVATE)
    with BuildSketch(Plane(origin=(-2.330718914, 1.5, 4.8), x_dir=(0, 1, 0), z_dir=(1, 0, 0))) as fillet_1_piece_14b_section:
        with BuildLine():
            CenterArc((0.132287566, -0.2), FILLET_1_R, 90, 41.409622109)
            Line((0, -0.05), (-0.002645751, -0.047))
            ThreePointArc((-0.002645751, -0.047), (-0.004, -0.025), (-0.004, 0))
            Line((-0.004, 0), (0, 0.004))
            Line((0, 0.004), (0.132287566, 0.004))
            Line((0.132287566, 0.004), (0.132287566, 0))
        make_face()
    fillet_1_piece_14b = extrude(amount=4.330718914, mode=Mode.PRIVATE)
    fillet_1_piece_14b = split(fillet_1_piece_14b, bisect_by=Plane(origin=(-2, 1.536281513, 4.788045002), z_dir=(-1, 0, 0)), keep=Keep.TOP, mode=Mode.PRIVATE)
    fillet_1_piece_14 = fillet_1_piece_14a & fillet_1_piece_14b
    add(fillet_1_piece_14, mode=Mode.SUBTRACT)
    with BuildSketch(Plane(origin=(-2, 1.5, 4.8), x_dir=(0, 1, 0), z_dir=(1, 0, 0))) as fillet_1_piece_15a_section:
        with BuildLine():
            CenterArc((0.132287566, -0.2), FILLET_1_R, 90, 41.409622109)
            Line((0, -0.05), (-0.002645751, -0.047))
            ThreePointArc((-0.002645751, -0.047), (-0.004, -0.025), (-0.004, 0))
            Line((-0.004, 0), (0, 0.004))
            Line((0, 0.004), (0.132287566, 0.004))
            Line((0.132287566, 0.004), (0.132287566, 0))
        make_face()
    fillet_1_piece_15a = extrude(amount=4.330718914, mode=Mode.PRIVATE)
    fillet_1_piece_15a = split(fillet_1_piece_15a, bisect_by=Plane(origin=(2, 1.536281513, 4.788045002), z_dir=(1, 0, 0)), keep=Keep.TOP, mode=Mode.PRIVATE)
    with BuildSketch(Plane(origin=(2, 1.830718914, 4.8), x_dir=(1, 0, 0), z_dir=(0, -1, 0))) as fillet_1_piece_15b_section:
        with BuildLine():
            CenterArc((0.132287566, -0.2), FILLET_1_R, 90, 41.409622109)
            Line((0, -0.05), (-0.002645751, -0.047))
            ThreePointArc((-0.002645751, -0.047), (-0.004, -0.025), (-0.004, 0))
            Line((-0.004, 0), (0, 0.004))
            Line((0, 0.004), (0.132287566, 0.004))
            Line((0.132287566, 0.004), (0.132287566, 0))
        make_face()
    fillet_1_piece_15b = extrude(amount=3.330718914, mode=Mode.PRIVATE)
    fillet_1_piece_15b = split(fillet_1_piece_15b, bisect_by=Plane(origin=(2.036281513, 1.5, 4.788045002), z_dir=(0, 1, 0)), keep=Keep.TOP, mode=Mode.PRIVATE)
    fillet_1_piece_15 = fillet_1_piece_15a & fillet_1_piece_15b
    add(fillet_1_piece_15, mode=Mode.SUBTRACT)
    with BuildSketch(Plane(origin=(-2, -1.830718914, 4.8), x_dir=(-1, 0, 0), z_dir=(0, 1, 0))) as fillet_1_piece_16a_section:
        with BuildLine():
            CenterArc((0.132287566, -0.2), FILLET_1_R, 90, 41.409622109)
            Line((0, -0.05), (-0.002645751, -0.047))
            ThreePointArc((-0.002645751, -0.047), (-0.004, -0.025), (-0.004, 0))
            Line((-0.004, 0), (0, 0.004))
            Line((0, 0.004), (0.132287566, 0.004))
            Line((0.132287566, 0.004), (0.132287566, 0))
        make_face()
    fillet_1_piece_16a = extrude(amount=3.330718914, mode=Mode.PRIVATE)
    fillet_1_piece_16a = split(fillet_1_piece_16a, bisect_by=Plane(origin=(-2.036281513, -1.5, 4.788045002), z_dir=(0, -1, 0)), keep=Keep.TOP, mode=Mode.PRIVATE)
    with BuildSketch(Plane(origin=(2, -1.5, 4.8), x_dir=(0, -1, 0), z_dir=(-1, 0, 0))) as fillet_1_piece_16b_section:
        with BuildLine():
            CenterArc((0.132287566, -0.2), FILLET_1_R, 90, 41.409622109)
            Line((0, -0.05), (-0.002645751, -0.047))
            ThreePointArc((-0.002645751, -0.047), (-0.004, -0.025), (-0.004, 0))
            Line((-0.004, 0), (0, 0.004))
            Line((0, 0.004), (0.132287566, 0.004))
            Line((0.132287566, 0.004), (0.132287566, 0))
        make_face()
    fillet_1_piece_16b = extrude(amount=4.330718914, mode=Mode.PRIVATE)
    fillet_1_piece_16b = split(fillet_1_piece_16b, bisect_by=Plane(origin=(-2, -1.536281513, 4.788045002), z_dir=(-1, 0, 0)), keep=Keep.TOP, mode=Mode.PRIVATE)
    fillet_1_piece_16 = fillet_1_piece_16a & fillet_1_piece_16b
    add(fillet_1_piece_16, mode=Mode.SUBTRACT)
    with BuildSketch(Plane(origin=(2.330718914, -1.5, 4.8), x_dir=(0, -1, 0), z_dir=(-1, 0, 0))) as fillet_1_piece_17a_section:
        with BuildLine():
            CenterArc((0.132287566, -0.2), FILLET_1_R, 90, 41.409622109)
            Line((0, -0.05), (-0.002645751, -0.047))
            ThreePointArc((-0.002645751, -0.047), (-0.004, -0.025), (-0.004, 0))
            Line((-0.004, 0), (0, 0.004))
            Line((0, 0.004), (0.132287566, 0.004))
            Line((0.132287566, 0.004), (0.132287566, 0))
        make_face()
    fillet_1_piece_17a = extrude(amount=4.330718914, mode=Mode.PRIVATE)
    fillet_1_piece_17a = split(fillet_1_piece_17a, bisect_by=Plane(origin=(2, -1.536281513, 4.788045002), z_dir=(1, 0, 0)), keep=Keep.TOP, mode=Mode.PRIVATE)
    with BuildSketch(Plane(origin=(2, 1.5, 4.8), x_dir=(1, 0, 0), z_dir=(0, -1, 0))) as fillet_1_piece_17b_section:
        with BuildLine():
            CenterArc((0.132287566, -0.2), FILLET_1_R, 90, 41.409622109)
            Line((0, -0.05), (-0.002645751, -0.047))
            ThreePointArc((-0.002645751, -0.047), (-0.004, -0.025), (-0.004, 0))
            Line((-0.004, 0), (0, 0.004))
            Line((0, 0.004), (0.132287566, 0.004))
            Line((0.132287566, 0.004), (0.132287566, 0))
        make_face()
    fillet_1_piece_17b = extrude(amount=3.330718914, mode=Mode.PRIVATE)
    fillet_1_piece_17b = split(fillet_1_piece_17b, bisect_by=Plane(origin=(2.036281513, -1.5, 4.788045002), z_dir=(0, -1, 0)), keep=Keep.TOP, mode=Mode.PRIVATE)
    fillet_1_piece_17 = fillet_1_piece_17a & fillet_1_piece_17b
    add(fillet_1_piece_17, mode=Mode.SUBTRACT)


solid = part.part
